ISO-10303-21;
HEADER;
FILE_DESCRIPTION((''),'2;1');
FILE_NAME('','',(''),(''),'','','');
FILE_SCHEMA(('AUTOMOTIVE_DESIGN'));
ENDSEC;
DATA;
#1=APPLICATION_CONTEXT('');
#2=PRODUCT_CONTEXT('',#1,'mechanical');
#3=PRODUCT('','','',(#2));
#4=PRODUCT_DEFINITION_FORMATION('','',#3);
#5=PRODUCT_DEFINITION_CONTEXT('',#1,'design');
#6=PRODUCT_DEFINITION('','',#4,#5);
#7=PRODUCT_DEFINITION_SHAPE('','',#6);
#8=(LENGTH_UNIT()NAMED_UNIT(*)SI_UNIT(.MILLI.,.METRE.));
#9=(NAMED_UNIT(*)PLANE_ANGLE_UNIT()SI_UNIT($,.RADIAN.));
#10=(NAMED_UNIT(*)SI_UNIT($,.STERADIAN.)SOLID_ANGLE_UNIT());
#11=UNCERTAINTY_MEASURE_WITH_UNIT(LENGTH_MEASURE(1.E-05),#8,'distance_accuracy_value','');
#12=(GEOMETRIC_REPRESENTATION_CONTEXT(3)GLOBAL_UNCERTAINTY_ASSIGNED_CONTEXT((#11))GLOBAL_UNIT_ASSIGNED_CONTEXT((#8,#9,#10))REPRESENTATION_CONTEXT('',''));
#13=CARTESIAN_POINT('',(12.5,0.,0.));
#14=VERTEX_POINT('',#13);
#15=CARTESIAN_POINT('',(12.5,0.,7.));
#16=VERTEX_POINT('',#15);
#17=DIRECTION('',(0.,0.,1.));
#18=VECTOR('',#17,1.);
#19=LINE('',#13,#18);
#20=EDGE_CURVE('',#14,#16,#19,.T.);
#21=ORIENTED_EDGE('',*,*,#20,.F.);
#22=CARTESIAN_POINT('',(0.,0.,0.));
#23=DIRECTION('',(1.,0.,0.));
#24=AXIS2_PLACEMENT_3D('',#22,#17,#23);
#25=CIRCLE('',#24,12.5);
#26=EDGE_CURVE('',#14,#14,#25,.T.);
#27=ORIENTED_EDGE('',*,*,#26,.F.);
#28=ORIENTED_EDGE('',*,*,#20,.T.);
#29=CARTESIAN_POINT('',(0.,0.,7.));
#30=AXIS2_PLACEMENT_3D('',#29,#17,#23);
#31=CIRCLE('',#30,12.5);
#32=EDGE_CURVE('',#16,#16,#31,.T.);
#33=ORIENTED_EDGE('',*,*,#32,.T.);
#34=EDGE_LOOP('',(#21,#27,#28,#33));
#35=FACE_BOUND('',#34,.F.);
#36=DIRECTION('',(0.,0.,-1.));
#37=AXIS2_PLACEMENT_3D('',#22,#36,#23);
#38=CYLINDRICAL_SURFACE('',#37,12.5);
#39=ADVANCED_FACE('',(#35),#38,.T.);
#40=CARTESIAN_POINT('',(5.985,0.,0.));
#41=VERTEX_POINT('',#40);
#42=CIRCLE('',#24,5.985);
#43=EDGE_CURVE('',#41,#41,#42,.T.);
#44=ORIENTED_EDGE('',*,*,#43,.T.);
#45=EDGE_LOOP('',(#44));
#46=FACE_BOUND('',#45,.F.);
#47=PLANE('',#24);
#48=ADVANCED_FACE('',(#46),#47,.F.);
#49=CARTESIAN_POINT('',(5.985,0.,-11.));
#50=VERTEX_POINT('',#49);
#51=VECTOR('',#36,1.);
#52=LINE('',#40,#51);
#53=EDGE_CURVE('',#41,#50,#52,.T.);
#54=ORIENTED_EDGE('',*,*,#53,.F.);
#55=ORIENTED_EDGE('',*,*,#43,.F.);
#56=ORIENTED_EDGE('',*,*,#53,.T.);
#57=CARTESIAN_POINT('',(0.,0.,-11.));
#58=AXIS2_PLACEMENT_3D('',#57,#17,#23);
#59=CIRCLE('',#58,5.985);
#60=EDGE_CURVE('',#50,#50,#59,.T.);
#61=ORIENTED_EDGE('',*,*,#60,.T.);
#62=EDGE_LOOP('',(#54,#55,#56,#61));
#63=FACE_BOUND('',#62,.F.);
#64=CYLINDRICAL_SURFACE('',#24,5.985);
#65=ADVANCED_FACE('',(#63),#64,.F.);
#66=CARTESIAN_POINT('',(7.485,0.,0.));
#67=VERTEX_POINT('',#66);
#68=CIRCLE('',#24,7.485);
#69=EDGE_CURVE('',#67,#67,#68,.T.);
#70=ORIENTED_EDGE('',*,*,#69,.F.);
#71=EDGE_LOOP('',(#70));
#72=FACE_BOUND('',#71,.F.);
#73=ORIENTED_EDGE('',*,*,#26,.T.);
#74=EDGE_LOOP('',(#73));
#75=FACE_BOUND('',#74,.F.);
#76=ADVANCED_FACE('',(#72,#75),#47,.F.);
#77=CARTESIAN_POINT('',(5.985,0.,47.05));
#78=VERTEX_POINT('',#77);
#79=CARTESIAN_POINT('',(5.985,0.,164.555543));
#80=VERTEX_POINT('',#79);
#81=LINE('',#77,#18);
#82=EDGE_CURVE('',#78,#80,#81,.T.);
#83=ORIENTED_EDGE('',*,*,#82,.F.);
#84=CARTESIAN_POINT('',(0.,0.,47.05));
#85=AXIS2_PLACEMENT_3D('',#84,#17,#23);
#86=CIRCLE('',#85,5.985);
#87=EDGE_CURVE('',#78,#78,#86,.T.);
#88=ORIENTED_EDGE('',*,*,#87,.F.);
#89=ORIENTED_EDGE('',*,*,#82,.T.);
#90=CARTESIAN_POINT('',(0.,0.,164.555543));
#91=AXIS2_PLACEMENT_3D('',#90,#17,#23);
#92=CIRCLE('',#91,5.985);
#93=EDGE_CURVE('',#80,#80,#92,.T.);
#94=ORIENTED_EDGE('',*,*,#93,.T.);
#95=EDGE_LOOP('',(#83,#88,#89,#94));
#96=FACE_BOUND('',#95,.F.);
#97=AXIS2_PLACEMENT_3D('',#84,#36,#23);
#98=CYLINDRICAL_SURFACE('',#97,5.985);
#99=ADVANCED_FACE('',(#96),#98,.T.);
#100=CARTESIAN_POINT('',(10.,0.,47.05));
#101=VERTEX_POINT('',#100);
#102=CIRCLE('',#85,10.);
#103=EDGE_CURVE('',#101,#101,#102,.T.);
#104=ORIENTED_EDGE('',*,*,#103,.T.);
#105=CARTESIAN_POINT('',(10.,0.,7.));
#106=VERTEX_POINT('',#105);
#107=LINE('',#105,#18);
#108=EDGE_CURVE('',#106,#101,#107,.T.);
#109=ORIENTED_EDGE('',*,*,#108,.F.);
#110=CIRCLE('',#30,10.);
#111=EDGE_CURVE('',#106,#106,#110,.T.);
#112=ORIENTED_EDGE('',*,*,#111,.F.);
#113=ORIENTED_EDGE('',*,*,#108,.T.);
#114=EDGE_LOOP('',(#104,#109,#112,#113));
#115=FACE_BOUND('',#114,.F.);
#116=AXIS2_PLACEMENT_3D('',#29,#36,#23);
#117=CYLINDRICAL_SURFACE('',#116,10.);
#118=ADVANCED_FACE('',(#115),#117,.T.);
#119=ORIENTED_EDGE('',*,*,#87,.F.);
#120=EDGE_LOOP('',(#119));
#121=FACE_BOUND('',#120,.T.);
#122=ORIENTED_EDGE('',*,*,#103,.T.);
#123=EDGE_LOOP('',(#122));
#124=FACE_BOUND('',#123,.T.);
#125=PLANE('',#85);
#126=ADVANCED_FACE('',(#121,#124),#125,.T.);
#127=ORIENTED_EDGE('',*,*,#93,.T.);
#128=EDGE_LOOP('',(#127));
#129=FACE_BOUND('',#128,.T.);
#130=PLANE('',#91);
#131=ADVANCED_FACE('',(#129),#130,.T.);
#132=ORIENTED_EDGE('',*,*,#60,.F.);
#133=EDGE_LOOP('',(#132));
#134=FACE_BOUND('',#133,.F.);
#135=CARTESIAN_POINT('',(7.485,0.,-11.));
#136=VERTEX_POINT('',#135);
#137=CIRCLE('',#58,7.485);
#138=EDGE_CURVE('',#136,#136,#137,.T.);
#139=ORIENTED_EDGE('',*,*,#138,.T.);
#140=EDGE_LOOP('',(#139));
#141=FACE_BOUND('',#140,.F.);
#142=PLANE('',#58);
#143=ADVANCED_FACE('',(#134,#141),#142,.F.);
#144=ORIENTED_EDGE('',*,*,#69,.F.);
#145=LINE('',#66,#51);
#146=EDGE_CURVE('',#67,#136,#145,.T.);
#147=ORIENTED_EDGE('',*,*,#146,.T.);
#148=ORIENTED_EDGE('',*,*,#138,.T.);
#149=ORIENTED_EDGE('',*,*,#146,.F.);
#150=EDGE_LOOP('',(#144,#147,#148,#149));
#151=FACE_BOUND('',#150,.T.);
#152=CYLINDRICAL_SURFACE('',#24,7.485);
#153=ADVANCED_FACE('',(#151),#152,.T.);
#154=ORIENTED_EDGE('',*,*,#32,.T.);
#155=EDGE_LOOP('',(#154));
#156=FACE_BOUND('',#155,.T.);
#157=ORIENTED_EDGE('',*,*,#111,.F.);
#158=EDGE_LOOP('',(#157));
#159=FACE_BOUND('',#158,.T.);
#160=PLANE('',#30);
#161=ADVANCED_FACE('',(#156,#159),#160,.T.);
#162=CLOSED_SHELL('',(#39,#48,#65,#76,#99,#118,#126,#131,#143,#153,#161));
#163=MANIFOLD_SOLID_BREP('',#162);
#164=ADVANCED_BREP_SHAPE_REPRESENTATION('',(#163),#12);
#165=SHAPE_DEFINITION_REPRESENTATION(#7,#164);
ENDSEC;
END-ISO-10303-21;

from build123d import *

# Parameters (mm, degrees)
F0_R      = 7.485
F0_R_2    = 5.985
F1_DEPTH  = 11
F2_R      = 7.485
F2_R_2    = 5.985
F3_DEPTH  = 7
F2_R_3    = 12.5
F4_DEPTH  = 7
F5_R      = 10
F6_DEPTH  = 40.05
F9_R      = 5.985
F10_DEPTH = 117.5055425


# Not quite as in the source:
# - an extrude ends at something that could not be found from the text; its depth is read off the source's solid
# - the program builds the solid bodies; features that only make, move or delete a surface that nothing else refers to are left out


with BuildPart() as f1:
    # F0 (on Top) → F1 (new body)
    with BuildSketch(Plane.XY):
        Circle(F0_R)
        Circle(F0_R_2, mode=Mode.SUBTRACT)
    extrude(amount=-F1_DEPTH)

    # F2 (on face) → F3 (join)
    with BuildSketch(Plane.XY):
        Circle(F2_R)
        Circle(F2_R_2, mode=Mode.SUBTRACT)
    extrude(amount=F3_DEPTH)

    # F2 (on face) → F4 (join)
    with BuildSketch(Plane.XY):
        Circle(F2_R_3)
    extrude(amount=F4_DEPTH)

    # F5 (on face) → F6 (join)
    with BuildSketch(Plane.XY.offset(7)):
        Circle(F5_R)
    extrude(amount=F6_DEPTH)

    # F9 (on face) → F10 (join, through all)
    with BuildSketch(Plane.XY.offset(47.05)):
        Circle(F9_R)
    extrude(amount=F10_DEPTH)


solid = f1.part
